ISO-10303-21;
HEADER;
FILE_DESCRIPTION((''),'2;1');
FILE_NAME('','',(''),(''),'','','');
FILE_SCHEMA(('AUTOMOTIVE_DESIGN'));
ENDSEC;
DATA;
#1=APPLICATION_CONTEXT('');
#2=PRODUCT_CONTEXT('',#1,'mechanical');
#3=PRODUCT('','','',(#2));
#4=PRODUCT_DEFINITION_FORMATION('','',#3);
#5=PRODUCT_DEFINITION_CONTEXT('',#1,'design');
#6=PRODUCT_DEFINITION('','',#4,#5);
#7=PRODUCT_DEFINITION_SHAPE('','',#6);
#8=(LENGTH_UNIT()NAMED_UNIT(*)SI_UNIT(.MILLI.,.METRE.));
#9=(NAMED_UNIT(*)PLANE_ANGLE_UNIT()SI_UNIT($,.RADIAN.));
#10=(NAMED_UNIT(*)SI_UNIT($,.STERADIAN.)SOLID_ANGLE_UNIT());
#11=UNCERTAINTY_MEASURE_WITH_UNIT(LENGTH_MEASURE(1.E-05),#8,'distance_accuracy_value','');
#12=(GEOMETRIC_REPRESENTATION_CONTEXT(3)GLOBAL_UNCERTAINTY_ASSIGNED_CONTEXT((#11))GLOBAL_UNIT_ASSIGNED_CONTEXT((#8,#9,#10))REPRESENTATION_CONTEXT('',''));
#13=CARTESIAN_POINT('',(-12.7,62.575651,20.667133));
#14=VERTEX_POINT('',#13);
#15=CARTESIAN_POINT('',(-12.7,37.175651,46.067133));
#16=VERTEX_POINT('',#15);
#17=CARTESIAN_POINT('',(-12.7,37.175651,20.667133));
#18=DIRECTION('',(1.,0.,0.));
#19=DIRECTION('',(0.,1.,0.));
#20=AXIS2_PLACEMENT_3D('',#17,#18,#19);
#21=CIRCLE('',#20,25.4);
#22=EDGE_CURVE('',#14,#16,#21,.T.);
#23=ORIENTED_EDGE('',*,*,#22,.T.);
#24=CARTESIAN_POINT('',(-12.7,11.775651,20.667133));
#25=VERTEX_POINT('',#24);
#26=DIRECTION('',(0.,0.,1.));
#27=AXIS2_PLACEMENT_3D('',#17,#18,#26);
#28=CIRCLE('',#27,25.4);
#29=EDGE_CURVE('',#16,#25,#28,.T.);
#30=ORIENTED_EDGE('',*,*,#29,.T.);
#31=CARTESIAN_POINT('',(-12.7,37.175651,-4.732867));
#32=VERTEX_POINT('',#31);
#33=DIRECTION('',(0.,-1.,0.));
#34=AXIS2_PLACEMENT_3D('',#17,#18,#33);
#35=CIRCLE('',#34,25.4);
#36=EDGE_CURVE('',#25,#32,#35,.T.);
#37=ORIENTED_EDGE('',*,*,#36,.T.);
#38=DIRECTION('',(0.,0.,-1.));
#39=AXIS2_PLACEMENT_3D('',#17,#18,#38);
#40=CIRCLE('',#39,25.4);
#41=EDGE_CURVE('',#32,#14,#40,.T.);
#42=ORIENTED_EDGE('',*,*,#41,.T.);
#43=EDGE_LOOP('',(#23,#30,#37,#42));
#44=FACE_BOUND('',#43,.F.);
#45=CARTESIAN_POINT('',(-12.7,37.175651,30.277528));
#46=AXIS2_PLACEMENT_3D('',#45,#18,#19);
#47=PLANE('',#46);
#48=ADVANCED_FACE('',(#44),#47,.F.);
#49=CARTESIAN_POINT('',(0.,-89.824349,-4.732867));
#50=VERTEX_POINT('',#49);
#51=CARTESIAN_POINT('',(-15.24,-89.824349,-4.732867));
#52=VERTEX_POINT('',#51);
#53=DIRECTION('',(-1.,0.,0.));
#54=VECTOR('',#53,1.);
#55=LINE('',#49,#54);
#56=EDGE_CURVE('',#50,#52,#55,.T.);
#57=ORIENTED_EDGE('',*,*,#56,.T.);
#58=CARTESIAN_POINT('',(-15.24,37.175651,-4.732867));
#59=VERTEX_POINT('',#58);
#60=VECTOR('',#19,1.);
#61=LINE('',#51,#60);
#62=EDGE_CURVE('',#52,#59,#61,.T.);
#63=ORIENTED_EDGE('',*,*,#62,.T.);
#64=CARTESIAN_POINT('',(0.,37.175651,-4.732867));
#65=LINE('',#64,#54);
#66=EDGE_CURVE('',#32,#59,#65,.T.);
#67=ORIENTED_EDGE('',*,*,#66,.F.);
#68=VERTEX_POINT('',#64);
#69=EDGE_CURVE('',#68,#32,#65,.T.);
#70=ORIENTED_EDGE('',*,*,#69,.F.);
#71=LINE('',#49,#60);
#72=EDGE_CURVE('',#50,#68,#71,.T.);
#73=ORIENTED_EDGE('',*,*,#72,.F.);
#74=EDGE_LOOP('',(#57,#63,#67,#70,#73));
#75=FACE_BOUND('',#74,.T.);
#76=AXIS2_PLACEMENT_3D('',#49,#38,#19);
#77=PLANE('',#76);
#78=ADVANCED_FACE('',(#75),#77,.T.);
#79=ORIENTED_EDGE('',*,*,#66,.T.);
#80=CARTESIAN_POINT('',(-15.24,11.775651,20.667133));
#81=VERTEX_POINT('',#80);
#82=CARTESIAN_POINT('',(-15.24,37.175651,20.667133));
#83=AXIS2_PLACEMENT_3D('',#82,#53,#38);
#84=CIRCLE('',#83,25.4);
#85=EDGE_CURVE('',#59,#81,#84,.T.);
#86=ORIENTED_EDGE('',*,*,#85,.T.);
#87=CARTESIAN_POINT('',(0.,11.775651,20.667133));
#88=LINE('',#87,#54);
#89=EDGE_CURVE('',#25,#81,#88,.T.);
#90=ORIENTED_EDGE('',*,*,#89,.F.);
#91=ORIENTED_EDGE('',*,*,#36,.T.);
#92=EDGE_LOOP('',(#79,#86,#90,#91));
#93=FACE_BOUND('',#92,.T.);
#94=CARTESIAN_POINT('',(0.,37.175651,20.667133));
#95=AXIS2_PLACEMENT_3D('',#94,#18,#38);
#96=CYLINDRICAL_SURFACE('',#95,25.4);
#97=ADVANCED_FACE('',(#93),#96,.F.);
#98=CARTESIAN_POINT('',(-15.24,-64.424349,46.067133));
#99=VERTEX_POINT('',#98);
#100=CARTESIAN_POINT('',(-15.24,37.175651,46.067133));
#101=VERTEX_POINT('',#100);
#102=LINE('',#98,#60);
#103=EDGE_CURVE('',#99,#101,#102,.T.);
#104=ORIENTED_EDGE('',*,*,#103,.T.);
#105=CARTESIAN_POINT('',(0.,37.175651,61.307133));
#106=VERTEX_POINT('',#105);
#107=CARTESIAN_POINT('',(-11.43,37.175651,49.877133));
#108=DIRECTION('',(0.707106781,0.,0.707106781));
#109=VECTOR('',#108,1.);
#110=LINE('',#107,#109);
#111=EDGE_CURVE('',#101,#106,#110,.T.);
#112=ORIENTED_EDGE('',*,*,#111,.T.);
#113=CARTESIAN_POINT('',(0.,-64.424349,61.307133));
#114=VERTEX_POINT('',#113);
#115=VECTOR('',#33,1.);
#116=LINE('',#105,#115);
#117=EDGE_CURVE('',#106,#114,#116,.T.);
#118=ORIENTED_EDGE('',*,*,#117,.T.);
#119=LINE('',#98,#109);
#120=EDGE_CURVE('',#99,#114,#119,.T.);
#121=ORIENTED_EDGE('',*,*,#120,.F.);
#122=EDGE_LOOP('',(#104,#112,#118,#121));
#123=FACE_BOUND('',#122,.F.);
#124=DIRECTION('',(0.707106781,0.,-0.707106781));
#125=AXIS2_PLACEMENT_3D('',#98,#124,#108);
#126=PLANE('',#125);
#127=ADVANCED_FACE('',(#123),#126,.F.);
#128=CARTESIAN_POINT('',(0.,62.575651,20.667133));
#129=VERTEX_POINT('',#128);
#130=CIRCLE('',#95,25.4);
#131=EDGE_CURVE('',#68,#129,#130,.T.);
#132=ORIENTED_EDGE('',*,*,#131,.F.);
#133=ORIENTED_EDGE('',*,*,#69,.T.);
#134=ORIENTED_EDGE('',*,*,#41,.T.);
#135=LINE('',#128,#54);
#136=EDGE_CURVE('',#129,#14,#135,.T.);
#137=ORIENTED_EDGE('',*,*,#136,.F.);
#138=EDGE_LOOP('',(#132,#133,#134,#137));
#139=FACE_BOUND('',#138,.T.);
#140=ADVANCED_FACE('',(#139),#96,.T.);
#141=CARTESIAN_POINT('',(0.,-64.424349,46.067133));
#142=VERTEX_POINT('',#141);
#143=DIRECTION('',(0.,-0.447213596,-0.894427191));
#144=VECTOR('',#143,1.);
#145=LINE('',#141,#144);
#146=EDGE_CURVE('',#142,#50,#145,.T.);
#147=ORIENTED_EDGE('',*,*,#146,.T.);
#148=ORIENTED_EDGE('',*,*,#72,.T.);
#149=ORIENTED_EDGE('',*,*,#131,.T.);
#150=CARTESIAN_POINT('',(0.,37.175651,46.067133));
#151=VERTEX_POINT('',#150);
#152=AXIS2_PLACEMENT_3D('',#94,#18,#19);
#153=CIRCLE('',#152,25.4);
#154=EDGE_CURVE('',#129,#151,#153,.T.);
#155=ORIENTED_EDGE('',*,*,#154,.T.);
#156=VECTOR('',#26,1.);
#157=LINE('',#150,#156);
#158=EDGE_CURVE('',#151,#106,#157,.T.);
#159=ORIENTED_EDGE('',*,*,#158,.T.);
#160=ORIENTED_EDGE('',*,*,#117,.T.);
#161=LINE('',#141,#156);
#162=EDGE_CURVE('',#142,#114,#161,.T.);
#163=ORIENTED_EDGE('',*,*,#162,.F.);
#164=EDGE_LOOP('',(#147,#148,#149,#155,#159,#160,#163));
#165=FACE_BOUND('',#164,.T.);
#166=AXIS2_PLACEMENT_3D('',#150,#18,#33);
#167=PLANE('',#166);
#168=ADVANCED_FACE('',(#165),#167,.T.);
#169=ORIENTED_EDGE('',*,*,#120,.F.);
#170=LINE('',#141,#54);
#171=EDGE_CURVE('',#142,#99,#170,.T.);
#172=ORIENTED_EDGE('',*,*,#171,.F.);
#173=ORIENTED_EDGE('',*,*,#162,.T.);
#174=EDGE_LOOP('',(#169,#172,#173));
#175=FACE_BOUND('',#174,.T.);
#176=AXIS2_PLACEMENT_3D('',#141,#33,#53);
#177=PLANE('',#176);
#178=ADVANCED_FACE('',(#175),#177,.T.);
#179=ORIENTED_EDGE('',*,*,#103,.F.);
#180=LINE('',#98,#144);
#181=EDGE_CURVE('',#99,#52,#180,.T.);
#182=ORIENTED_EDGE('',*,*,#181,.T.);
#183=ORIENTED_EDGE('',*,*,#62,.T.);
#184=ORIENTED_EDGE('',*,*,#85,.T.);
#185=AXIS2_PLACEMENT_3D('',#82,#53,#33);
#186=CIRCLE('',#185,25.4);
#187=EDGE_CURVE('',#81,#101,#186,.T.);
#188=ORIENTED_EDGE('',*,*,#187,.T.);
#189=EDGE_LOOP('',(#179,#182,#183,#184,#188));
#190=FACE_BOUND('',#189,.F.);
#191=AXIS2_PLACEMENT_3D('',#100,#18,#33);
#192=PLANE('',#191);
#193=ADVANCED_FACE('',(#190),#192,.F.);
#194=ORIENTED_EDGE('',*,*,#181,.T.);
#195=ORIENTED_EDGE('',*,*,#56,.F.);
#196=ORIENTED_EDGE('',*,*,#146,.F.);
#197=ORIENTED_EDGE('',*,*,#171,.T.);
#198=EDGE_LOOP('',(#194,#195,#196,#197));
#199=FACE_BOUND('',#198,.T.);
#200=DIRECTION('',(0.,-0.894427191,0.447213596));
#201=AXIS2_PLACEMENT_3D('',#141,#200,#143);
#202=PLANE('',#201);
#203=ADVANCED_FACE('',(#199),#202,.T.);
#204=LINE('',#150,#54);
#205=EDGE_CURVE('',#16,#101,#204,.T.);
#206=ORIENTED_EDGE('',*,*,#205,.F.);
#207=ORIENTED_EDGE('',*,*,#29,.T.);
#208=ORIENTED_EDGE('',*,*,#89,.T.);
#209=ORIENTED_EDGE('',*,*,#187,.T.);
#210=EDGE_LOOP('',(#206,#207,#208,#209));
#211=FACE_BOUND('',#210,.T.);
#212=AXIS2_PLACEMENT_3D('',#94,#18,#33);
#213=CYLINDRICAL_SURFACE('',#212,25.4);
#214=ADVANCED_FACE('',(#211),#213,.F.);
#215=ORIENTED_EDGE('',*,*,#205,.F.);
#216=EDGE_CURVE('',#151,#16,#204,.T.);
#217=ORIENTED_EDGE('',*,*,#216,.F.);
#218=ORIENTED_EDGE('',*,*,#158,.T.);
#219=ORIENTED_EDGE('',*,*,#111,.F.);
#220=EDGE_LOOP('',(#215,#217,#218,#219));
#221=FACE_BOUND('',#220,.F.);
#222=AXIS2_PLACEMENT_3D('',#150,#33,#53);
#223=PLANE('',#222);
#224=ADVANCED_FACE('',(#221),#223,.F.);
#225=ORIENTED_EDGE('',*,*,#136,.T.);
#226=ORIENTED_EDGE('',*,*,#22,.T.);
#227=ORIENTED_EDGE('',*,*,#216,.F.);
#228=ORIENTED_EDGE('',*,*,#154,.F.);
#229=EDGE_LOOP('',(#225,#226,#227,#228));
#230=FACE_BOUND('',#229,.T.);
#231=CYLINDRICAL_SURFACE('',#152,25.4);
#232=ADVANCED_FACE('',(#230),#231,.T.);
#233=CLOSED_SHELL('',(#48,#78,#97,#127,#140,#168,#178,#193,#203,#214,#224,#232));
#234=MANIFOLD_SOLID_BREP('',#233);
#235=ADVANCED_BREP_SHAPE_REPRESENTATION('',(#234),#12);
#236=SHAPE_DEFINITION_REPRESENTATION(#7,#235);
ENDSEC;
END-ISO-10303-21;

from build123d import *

# Parameters (mm, degrees)
F1_DEPTH = 15.24
F2_DEPTH = 12.7
F3_DEPTH = 15.24
F5_DEPTH = 228.6


# Not quite as in the source:
# - a feature names something its author has since deleted; it is built from what else it names


with BuildPart() as f1:
    # F0 (on Right) → F1 (new body)
    with BuildSketch(Plane.YZ):
        with BuildLine():
            ThreePointArc((37.1756509936, -4.7328671039), (19.2151387515, 2.7066206539), (11.7756509936, 20.6671328961))
            Line((11.7756509936, 20.6671328961), (-77.1243490064, 20.6671328961))
            Line((-77.1243490064, 20.6671328961), (-89.8243490064, -4.7328671039))
            Line((-89.8243490064, -4.7328671039), (37.1756509936, -4.7328671039))
        make_face()
        with BuildLine():
            Line((-77.1243490064, 20.6671328961), (11.7756509936, 20.6671328961))
            ThreePointArc((11.7756509936, 20.6671328961), (19.2151387515, 38.6276451382), (37.1756509936, 46.0671328961))
            Line((37.1756509936, 46.0671328961), (-64.4243490064, 46.0671328961))
            Line((-64.4243490064, 46.0671328961), (-77.1243490064, 20.6671328961))
        make_face()
    extrude(amount=-F1_DEPTH)

    # F0 (on Right) → F2 (join)
    with BuildSketch(Plane.YZ):
        with BuildLine():
            Line((11.7756509936, 20.6671328961), (62.5756509936, 20.6671328961))
            ThreePointArc((62.5756509936, 20.6671328961), (55.1361632357, 38.6276451382), (37.1756509936, 46.0671328961))
            ThreePointArc((37.1756509936, 46.0671328961), (19.2151387515, 38.6276451382), (11.7756509936, 20.6671328961))
        make_face()
        with BuildLine():
            ThreePointArc((37.1756509936, -4.7328671039), (55.1361632357, 2.7066206539), (62.5756509936, 20.6671328961))
            Line((62.5756509936, 20.6671328961), (11.7756509936, 20.6671328961))
            ThreePointArc((11.7756509936, 20.6671328961), (19.2151387515, 2.7066206539), (37.1756509936, -4.7328671039))
        make_face()
    extrude(amount=-F2_DEPTH)

    # F3 (add): a face of the model
    f3_faces = [f1.faces().sort_by_distance(p)[0] for p in [
        (-7.62, -13.6243490064, 46.0671328961),
    ]]
    extrude(f3_faces, amount=F3_DEPTH)

    # F4 (on face) → F5 (cut)
    with BuildSketch(Plane.XZ.offset(64.4243490064)):
        Polygon((-15.24, 46.0671328961), (0, 61.3071328961), (-15.24, 61.3071328961), align=None)
    extrude(amount=-F5_DEPTH, mode=Mode.SUBTRACT)


solid = f1.part
